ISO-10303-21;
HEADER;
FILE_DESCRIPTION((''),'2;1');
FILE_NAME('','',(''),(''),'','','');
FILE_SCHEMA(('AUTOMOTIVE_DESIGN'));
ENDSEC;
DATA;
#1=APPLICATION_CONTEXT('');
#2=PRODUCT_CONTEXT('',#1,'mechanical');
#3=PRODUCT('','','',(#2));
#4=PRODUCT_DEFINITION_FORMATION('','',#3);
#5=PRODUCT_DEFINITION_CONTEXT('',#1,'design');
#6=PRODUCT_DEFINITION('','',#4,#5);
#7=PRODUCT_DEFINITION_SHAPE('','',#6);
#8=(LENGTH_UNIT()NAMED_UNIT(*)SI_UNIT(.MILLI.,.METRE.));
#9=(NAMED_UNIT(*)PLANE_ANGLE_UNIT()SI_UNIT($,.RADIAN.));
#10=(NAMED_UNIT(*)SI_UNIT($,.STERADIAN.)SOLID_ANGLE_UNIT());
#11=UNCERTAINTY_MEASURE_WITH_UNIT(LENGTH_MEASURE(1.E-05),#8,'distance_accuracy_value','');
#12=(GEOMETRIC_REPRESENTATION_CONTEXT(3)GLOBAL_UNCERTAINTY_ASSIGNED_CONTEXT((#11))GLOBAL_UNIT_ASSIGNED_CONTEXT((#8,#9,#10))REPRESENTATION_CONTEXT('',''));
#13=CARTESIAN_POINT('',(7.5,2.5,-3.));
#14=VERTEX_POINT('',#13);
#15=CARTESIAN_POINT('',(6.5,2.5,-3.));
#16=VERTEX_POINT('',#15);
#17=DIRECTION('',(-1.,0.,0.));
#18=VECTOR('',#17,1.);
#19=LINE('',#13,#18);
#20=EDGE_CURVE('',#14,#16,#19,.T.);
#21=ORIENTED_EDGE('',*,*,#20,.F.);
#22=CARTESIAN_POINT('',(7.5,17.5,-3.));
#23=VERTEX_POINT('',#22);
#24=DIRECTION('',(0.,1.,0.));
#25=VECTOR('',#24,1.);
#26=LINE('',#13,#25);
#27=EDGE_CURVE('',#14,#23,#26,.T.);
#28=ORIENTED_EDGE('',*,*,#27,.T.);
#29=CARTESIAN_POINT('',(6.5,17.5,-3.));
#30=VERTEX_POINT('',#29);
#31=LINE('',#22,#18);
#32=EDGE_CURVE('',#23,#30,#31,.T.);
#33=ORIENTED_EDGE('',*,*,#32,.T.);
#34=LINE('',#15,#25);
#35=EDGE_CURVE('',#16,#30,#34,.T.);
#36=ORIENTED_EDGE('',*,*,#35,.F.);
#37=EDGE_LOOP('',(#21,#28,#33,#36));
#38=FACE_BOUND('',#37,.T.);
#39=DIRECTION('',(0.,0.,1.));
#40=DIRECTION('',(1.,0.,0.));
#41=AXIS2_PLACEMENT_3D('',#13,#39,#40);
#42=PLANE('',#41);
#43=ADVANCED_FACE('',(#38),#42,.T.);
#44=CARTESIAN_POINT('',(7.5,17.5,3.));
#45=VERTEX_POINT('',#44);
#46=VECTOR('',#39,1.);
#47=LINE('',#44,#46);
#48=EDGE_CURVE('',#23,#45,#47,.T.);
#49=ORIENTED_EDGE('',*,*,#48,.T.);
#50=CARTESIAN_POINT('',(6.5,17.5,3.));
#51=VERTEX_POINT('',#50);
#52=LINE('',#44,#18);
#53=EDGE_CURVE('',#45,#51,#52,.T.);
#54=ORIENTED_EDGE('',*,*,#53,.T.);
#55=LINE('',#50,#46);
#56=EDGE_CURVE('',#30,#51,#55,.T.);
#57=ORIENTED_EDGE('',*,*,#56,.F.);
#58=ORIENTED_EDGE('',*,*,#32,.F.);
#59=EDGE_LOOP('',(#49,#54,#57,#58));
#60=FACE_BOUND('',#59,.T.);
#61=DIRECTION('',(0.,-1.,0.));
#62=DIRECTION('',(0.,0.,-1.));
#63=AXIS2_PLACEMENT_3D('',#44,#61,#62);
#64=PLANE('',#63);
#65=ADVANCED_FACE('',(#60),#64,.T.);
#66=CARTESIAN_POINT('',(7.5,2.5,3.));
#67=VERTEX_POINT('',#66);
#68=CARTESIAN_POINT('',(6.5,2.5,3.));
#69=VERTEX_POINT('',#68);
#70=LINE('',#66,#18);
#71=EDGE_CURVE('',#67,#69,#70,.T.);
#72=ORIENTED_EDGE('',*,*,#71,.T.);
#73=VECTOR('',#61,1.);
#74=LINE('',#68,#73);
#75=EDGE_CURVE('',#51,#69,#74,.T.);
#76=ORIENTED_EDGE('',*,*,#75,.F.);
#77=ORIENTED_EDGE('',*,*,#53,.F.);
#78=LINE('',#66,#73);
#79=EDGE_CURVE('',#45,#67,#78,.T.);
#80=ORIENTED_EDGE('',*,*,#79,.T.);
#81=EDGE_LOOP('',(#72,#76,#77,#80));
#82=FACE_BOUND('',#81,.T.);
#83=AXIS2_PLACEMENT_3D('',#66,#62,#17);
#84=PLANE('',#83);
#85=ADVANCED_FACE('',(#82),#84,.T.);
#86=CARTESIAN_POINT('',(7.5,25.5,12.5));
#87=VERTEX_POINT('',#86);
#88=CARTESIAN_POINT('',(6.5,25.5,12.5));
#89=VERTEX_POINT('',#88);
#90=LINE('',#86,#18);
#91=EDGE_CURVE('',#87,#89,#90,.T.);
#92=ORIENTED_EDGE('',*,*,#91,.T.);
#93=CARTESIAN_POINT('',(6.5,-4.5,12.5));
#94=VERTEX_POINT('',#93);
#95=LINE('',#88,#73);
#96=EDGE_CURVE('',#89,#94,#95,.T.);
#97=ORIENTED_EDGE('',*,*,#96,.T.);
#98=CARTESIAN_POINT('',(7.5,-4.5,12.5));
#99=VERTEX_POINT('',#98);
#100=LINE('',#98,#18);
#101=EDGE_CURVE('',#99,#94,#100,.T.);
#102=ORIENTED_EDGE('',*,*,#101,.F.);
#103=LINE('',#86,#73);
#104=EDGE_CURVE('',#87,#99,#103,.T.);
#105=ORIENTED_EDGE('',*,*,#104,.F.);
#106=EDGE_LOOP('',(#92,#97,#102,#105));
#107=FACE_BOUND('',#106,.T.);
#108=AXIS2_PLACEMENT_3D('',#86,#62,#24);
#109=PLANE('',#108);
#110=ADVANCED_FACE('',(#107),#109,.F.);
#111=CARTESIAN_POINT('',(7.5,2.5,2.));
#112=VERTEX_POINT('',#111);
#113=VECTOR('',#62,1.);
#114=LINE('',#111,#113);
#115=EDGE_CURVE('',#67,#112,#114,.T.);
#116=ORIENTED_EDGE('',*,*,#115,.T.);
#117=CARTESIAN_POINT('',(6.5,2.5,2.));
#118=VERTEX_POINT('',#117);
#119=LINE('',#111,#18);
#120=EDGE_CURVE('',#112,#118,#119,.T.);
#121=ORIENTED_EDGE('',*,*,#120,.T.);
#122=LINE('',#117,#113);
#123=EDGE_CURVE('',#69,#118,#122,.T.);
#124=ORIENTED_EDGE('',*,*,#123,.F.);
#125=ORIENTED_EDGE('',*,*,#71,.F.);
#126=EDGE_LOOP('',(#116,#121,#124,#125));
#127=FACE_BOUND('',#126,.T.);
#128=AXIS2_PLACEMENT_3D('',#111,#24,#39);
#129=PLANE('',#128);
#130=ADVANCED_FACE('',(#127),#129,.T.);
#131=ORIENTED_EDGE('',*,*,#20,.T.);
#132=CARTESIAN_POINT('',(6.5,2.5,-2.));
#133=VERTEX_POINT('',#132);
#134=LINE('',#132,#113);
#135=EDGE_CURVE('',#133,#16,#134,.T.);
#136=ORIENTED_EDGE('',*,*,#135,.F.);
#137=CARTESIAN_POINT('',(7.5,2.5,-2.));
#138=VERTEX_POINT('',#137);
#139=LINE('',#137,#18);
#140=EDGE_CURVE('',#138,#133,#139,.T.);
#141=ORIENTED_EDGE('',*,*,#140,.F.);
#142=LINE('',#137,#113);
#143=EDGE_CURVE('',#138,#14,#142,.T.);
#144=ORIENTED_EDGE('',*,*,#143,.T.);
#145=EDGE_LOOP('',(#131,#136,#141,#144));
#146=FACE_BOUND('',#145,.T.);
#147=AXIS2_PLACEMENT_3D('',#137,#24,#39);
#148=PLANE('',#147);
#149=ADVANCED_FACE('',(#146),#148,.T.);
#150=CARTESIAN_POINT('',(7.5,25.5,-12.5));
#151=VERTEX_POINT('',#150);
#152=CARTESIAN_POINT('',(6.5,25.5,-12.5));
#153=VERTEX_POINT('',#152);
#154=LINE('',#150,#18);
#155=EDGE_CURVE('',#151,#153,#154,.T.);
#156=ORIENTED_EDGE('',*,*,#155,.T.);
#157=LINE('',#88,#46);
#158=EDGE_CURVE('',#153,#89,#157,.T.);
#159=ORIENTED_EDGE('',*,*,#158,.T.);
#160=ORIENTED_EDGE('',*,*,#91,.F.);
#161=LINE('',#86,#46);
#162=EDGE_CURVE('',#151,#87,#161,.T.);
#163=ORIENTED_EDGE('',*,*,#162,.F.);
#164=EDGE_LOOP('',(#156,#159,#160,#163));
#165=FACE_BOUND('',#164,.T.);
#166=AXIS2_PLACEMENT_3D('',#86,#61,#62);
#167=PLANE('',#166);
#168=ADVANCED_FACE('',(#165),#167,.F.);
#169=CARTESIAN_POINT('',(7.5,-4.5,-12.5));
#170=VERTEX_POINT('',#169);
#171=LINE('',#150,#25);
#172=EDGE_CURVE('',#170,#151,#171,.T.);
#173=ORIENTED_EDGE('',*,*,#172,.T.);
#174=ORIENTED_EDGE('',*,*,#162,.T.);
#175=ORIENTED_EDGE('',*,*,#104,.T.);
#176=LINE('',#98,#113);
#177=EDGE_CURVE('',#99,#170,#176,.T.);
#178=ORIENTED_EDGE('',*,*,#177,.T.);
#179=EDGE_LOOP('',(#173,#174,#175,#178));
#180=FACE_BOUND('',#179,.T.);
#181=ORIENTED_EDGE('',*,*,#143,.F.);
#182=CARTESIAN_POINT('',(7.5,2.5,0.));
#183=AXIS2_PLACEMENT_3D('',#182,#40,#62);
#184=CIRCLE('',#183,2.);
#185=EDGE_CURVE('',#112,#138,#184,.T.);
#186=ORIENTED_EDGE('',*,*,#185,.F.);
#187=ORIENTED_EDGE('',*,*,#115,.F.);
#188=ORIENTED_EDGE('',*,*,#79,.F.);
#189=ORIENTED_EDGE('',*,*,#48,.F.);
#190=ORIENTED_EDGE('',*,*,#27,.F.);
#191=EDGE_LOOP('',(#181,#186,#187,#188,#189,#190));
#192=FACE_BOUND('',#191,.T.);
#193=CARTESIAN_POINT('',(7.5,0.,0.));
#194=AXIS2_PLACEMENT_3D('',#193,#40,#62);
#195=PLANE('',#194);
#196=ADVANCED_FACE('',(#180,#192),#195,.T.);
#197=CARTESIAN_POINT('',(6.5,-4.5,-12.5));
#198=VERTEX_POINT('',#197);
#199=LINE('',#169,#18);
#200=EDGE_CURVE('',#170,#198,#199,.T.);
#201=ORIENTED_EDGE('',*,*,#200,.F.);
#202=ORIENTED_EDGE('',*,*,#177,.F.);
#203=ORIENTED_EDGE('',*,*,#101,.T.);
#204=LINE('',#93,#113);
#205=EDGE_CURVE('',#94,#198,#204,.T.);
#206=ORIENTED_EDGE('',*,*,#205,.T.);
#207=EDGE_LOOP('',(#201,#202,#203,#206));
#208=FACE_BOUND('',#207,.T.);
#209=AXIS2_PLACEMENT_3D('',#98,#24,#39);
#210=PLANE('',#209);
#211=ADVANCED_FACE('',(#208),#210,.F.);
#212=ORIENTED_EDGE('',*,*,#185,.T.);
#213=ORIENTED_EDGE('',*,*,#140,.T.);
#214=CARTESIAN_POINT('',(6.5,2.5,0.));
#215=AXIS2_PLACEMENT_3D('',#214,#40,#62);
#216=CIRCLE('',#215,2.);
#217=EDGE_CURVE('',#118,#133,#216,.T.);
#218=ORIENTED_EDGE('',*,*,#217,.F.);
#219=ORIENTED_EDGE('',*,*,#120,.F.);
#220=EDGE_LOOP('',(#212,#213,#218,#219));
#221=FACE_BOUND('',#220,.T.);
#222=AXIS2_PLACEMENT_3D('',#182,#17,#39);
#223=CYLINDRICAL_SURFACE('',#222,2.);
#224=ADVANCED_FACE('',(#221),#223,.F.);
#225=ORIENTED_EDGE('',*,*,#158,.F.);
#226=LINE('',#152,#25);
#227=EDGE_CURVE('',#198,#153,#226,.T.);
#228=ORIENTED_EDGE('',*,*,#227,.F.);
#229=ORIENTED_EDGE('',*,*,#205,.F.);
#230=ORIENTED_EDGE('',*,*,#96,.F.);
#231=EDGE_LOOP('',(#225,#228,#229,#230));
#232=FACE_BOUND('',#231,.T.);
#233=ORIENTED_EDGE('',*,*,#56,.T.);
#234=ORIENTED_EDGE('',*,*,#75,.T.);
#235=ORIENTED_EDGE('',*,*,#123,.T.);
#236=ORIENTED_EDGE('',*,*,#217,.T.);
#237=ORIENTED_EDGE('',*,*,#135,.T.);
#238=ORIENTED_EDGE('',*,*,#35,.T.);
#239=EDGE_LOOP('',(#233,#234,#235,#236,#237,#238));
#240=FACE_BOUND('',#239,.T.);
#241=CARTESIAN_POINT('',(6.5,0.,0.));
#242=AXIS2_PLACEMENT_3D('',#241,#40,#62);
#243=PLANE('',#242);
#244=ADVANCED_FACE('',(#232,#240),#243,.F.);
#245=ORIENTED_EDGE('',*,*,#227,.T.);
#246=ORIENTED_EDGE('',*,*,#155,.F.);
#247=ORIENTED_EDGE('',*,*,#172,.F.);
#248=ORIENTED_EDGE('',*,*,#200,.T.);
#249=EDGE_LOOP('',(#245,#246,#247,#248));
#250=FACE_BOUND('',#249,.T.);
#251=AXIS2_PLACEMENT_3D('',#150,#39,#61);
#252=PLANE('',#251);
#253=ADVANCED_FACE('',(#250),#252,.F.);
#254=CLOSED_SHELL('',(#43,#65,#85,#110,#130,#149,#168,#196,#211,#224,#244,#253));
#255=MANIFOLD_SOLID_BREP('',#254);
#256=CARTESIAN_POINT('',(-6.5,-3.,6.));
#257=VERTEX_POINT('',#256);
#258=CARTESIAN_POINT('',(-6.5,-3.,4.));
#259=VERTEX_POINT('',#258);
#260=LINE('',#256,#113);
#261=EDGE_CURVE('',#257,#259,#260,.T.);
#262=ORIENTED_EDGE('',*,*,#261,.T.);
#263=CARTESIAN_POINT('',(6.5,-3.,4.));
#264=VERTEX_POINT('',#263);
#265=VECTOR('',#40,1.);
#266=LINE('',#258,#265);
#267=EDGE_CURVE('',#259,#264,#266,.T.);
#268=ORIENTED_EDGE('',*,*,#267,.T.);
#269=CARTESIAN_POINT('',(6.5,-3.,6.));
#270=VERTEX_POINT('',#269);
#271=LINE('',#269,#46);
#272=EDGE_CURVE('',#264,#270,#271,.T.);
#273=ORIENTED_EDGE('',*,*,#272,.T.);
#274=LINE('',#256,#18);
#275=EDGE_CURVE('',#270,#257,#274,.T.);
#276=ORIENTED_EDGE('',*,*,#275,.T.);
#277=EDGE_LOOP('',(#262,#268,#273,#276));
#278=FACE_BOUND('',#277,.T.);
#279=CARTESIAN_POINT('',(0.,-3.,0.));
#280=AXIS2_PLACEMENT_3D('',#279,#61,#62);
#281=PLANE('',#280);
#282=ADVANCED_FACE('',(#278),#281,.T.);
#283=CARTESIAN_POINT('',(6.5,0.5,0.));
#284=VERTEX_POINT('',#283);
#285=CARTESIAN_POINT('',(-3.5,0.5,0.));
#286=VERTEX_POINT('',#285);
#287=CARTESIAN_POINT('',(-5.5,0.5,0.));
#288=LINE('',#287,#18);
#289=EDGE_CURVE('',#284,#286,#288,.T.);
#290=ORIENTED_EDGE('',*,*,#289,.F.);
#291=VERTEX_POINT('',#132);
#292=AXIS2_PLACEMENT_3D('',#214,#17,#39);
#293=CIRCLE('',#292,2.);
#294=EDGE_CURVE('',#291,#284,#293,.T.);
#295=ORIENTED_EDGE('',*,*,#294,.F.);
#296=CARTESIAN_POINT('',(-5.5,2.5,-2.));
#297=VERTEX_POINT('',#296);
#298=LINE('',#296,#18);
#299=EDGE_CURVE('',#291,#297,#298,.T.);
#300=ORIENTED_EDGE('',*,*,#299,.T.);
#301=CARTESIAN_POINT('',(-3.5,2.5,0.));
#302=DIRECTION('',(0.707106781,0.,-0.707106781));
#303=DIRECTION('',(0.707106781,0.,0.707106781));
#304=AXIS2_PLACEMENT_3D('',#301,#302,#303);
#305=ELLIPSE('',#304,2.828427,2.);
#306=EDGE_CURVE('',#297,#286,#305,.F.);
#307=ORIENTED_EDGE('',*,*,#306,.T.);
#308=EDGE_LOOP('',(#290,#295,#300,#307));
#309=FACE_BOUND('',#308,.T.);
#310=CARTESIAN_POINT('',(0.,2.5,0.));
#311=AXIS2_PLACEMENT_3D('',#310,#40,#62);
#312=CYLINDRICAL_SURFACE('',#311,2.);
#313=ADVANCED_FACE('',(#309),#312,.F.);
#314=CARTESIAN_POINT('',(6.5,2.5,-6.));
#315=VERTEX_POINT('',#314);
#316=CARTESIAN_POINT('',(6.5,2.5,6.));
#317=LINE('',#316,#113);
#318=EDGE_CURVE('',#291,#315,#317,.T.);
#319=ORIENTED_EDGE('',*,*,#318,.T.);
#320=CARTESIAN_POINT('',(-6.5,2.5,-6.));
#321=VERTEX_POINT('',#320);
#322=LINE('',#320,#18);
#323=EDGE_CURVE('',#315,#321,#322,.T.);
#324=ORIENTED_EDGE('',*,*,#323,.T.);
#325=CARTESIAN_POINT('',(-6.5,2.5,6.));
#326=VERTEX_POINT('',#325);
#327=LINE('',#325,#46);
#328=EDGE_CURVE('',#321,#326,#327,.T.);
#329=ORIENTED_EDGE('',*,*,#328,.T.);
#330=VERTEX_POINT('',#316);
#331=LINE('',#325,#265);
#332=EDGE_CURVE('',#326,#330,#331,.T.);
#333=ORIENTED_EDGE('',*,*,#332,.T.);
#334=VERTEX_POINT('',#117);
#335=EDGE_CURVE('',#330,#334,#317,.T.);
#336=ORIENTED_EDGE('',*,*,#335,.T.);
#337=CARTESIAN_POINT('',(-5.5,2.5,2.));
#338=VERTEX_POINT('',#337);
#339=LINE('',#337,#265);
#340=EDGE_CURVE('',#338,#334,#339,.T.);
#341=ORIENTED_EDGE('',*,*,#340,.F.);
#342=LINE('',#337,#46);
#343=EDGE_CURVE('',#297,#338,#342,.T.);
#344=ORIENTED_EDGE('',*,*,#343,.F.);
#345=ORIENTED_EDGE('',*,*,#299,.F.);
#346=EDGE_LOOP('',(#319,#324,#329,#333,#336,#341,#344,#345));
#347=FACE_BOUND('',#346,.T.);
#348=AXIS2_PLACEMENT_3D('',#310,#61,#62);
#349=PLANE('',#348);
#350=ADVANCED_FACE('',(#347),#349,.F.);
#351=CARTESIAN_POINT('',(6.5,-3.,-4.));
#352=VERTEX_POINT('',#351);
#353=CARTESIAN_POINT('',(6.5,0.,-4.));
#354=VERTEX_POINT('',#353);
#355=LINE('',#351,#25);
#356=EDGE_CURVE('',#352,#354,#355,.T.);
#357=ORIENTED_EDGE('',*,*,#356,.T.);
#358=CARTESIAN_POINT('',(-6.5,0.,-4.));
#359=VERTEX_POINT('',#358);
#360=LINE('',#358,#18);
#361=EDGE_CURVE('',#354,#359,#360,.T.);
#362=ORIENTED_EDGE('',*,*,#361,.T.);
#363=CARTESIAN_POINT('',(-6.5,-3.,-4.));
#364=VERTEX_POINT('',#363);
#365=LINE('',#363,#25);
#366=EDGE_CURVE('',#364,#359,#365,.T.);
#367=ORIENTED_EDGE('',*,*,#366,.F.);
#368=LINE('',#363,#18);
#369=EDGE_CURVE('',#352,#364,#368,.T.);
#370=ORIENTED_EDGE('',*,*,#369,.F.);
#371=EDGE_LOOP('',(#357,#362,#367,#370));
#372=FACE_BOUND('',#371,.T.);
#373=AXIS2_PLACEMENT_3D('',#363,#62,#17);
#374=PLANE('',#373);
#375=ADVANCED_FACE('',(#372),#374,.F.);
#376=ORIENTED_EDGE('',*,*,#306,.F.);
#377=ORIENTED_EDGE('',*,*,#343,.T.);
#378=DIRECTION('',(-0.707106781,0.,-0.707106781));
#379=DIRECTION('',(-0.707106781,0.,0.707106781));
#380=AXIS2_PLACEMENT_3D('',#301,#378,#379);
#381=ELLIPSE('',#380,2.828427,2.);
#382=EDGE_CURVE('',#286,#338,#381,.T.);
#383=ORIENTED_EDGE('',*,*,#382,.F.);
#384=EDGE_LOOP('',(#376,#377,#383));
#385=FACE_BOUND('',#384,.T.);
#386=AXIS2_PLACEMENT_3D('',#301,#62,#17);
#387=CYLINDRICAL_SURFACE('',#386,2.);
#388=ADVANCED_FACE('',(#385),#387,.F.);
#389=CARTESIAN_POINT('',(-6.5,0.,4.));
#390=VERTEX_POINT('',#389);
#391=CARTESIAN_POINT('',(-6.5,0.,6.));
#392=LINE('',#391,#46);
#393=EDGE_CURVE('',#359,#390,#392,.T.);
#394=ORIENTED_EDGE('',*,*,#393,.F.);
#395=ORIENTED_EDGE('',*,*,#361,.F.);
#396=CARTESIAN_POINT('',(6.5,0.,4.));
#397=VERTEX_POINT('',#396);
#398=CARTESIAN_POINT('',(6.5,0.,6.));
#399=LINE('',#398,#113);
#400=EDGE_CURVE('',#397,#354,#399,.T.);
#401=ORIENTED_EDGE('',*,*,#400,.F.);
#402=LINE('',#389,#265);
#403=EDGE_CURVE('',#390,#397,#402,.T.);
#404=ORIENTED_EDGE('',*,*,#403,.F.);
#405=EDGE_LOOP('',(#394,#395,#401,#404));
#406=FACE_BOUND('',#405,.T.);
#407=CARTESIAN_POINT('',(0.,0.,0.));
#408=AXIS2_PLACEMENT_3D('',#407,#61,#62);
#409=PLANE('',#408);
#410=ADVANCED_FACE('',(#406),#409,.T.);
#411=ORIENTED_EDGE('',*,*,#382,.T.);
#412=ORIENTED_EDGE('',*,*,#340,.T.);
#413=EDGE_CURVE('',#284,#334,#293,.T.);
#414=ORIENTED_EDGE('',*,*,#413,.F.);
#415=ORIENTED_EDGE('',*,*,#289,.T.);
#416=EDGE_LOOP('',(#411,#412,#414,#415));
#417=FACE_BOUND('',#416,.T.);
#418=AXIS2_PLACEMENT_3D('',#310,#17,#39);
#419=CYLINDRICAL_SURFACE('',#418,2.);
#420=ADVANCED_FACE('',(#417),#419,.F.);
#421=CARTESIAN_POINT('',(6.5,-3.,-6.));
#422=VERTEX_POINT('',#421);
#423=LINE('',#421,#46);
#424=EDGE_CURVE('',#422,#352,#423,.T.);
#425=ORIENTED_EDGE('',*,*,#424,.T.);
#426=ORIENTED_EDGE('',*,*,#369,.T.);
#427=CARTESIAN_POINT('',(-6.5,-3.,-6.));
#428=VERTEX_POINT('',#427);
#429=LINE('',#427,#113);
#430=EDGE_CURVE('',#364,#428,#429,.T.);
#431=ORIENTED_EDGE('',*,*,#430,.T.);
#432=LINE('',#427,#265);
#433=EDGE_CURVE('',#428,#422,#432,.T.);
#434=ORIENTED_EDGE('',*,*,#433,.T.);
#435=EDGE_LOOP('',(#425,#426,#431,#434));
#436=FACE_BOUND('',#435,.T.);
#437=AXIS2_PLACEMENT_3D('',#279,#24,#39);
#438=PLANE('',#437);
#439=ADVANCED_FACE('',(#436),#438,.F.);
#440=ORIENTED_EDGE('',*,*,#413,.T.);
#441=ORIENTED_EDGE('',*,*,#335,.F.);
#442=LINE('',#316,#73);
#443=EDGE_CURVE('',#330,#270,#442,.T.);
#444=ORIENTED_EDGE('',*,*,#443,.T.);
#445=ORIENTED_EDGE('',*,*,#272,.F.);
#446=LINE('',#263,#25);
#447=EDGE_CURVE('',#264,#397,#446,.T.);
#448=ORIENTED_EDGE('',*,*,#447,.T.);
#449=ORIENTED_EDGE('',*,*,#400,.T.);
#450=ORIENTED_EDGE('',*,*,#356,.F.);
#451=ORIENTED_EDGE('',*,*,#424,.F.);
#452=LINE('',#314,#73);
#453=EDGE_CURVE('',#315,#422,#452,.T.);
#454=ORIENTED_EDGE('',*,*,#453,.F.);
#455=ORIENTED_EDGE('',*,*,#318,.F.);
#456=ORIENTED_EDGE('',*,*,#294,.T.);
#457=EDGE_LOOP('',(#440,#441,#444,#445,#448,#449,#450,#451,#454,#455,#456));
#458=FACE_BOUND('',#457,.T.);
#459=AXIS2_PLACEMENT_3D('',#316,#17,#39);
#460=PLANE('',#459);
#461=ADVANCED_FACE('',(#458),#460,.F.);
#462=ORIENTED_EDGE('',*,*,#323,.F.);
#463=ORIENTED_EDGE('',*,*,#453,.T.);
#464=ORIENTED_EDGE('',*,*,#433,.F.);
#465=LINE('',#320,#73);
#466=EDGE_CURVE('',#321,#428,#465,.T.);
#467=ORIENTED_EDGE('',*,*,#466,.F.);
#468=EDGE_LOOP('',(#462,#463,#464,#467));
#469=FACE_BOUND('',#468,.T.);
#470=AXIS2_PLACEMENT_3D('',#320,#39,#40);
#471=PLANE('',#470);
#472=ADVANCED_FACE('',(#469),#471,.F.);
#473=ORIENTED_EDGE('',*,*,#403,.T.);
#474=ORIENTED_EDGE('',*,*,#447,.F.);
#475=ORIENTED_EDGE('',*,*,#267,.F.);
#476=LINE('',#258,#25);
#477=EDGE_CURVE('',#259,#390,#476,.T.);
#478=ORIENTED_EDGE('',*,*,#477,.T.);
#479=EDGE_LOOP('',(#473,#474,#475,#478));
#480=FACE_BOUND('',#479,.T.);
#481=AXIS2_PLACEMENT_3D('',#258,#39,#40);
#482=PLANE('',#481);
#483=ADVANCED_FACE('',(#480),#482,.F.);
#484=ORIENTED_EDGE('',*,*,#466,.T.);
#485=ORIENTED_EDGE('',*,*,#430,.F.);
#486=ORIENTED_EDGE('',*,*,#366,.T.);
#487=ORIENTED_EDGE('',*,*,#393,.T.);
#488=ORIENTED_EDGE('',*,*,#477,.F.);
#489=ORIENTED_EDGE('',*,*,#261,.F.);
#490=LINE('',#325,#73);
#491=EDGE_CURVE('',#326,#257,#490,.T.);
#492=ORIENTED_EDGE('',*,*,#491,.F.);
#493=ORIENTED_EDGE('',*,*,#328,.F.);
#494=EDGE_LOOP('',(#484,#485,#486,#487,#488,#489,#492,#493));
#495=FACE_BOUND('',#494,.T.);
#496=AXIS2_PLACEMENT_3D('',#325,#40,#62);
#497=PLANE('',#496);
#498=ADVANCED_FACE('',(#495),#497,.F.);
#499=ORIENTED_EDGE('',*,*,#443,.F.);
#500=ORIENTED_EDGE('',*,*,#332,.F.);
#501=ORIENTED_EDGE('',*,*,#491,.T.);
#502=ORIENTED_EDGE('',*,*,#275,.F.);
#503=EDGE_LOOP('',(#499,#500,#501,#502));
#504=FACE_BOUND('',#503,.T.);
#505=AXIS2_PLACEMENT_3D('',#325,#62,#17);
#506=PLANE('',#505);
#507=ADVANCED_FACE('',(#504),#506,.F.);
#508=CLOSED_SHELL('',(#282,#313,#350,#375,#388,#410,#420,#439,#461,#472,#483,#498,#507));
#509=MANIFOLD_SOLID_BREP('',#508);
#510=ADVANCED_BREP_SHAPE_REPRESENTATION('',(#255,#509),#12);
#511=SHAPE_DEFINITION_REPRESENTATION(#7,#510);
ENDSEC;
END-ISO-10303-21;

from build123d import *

# Parameters (mm, degrees)
SKETCH1_W           = 13
SKETCH1_H           = 12
BOSS_EXTRUDE1_DEPTH = 2.5
SKETCH2_W           = 13
SKETCH2_H           = 2
BOSS_EXTRUDE2_DEPTH = 3
SKETCH3_W           = 12
SKETCH3_H           = 4
CUT_EXTRUDE2_DEPTH  = 2
FILLET1_R           = 2
SKETCH4_W           = 25
SKETCH4_H           = 30
BOSS_EXTRUDE5_DEPTH = 1


with BuildPart() as part:
    # Sketch1 → Boss-Extrude1 (new body)
    with BuildSketch(Plane(origin=(0, 0, 0), x_dir=(1, 0, 0), z_dir=(0, 1, 0))):
        Rectangle(SKETCH1_W, SKETCH1_H)
    extrude(amount=BOSS_EXTRUDE1_DEPTH)

    # Sketch2 → Boss-Extrude2 (add)
    with BuildSketch(Plane.XZ):
        with Locations((0, 5)):
            Rectangle(SKETCH2_W, SKETCH2_H)
        with Locations((0, -5)):
            Rectangle(SKETCH2_W, SKETCH2_H)
    extrude(amount=BOSS_EXTRUDE2_DEPTH)

    # Sketch3 → Cut-Extrude2 (cut)
    with BuildSketch(Plane(origin=(0, 2.5, 0), x_dir=(1, 0, 0), z_dir=(0, 1, 0))):
        with Locations((0.5, 0)):
            Rectangle(SKETCH3_W, SKETCH3_H)
    extrude(amount=-CUT_EXTRUDE2_DEPTH, mode=Mode.SUBTRACT)

    # Fillet1
    fillet1_edges = [part.edges().sort_by_distance(p)[0] for p in [
        (0.5, 0.5, 2),
        (0.5, 0.5, -2),
        (-5.5, 0.5, 0),
    ]]
    fillet(fillet1_edges, radius=FILLET1_R - 0.0001)  # a hair under: the kernel refuses the full size


with BuildPart() as body_2:
    # Sketch4 → Boss-Extrude5 (new body)
    with BuildSketch(Plane(origin=(6.5, 0, 0), x_dir=(0, 0, -1), z_dir=(1, 0, 0))):
        with Locations((0, 10.5)):
            Rectangle(SKETCH4_W, SKETCH4_H)
        with BuildLine():
            Line((-3, 2.5), (-3, 17.5))
            Line((-3, 17.5), (3, 17.5))
            Line((3, 17.5), (3, 2.5))
            Line((3, 2.5), (2, 2.5))
            ThreePointArc((2, 2.5), (0, 0.5), (-2, 2.5))
            Line((-2, 2.5), (-3, 2.5))
        make_face(mode=Mode.SUBTRACT)
    extrude(amount=BOSS_EXTRUDE5_DEPTH)


solid = Compound([part.part, body_2.part])
